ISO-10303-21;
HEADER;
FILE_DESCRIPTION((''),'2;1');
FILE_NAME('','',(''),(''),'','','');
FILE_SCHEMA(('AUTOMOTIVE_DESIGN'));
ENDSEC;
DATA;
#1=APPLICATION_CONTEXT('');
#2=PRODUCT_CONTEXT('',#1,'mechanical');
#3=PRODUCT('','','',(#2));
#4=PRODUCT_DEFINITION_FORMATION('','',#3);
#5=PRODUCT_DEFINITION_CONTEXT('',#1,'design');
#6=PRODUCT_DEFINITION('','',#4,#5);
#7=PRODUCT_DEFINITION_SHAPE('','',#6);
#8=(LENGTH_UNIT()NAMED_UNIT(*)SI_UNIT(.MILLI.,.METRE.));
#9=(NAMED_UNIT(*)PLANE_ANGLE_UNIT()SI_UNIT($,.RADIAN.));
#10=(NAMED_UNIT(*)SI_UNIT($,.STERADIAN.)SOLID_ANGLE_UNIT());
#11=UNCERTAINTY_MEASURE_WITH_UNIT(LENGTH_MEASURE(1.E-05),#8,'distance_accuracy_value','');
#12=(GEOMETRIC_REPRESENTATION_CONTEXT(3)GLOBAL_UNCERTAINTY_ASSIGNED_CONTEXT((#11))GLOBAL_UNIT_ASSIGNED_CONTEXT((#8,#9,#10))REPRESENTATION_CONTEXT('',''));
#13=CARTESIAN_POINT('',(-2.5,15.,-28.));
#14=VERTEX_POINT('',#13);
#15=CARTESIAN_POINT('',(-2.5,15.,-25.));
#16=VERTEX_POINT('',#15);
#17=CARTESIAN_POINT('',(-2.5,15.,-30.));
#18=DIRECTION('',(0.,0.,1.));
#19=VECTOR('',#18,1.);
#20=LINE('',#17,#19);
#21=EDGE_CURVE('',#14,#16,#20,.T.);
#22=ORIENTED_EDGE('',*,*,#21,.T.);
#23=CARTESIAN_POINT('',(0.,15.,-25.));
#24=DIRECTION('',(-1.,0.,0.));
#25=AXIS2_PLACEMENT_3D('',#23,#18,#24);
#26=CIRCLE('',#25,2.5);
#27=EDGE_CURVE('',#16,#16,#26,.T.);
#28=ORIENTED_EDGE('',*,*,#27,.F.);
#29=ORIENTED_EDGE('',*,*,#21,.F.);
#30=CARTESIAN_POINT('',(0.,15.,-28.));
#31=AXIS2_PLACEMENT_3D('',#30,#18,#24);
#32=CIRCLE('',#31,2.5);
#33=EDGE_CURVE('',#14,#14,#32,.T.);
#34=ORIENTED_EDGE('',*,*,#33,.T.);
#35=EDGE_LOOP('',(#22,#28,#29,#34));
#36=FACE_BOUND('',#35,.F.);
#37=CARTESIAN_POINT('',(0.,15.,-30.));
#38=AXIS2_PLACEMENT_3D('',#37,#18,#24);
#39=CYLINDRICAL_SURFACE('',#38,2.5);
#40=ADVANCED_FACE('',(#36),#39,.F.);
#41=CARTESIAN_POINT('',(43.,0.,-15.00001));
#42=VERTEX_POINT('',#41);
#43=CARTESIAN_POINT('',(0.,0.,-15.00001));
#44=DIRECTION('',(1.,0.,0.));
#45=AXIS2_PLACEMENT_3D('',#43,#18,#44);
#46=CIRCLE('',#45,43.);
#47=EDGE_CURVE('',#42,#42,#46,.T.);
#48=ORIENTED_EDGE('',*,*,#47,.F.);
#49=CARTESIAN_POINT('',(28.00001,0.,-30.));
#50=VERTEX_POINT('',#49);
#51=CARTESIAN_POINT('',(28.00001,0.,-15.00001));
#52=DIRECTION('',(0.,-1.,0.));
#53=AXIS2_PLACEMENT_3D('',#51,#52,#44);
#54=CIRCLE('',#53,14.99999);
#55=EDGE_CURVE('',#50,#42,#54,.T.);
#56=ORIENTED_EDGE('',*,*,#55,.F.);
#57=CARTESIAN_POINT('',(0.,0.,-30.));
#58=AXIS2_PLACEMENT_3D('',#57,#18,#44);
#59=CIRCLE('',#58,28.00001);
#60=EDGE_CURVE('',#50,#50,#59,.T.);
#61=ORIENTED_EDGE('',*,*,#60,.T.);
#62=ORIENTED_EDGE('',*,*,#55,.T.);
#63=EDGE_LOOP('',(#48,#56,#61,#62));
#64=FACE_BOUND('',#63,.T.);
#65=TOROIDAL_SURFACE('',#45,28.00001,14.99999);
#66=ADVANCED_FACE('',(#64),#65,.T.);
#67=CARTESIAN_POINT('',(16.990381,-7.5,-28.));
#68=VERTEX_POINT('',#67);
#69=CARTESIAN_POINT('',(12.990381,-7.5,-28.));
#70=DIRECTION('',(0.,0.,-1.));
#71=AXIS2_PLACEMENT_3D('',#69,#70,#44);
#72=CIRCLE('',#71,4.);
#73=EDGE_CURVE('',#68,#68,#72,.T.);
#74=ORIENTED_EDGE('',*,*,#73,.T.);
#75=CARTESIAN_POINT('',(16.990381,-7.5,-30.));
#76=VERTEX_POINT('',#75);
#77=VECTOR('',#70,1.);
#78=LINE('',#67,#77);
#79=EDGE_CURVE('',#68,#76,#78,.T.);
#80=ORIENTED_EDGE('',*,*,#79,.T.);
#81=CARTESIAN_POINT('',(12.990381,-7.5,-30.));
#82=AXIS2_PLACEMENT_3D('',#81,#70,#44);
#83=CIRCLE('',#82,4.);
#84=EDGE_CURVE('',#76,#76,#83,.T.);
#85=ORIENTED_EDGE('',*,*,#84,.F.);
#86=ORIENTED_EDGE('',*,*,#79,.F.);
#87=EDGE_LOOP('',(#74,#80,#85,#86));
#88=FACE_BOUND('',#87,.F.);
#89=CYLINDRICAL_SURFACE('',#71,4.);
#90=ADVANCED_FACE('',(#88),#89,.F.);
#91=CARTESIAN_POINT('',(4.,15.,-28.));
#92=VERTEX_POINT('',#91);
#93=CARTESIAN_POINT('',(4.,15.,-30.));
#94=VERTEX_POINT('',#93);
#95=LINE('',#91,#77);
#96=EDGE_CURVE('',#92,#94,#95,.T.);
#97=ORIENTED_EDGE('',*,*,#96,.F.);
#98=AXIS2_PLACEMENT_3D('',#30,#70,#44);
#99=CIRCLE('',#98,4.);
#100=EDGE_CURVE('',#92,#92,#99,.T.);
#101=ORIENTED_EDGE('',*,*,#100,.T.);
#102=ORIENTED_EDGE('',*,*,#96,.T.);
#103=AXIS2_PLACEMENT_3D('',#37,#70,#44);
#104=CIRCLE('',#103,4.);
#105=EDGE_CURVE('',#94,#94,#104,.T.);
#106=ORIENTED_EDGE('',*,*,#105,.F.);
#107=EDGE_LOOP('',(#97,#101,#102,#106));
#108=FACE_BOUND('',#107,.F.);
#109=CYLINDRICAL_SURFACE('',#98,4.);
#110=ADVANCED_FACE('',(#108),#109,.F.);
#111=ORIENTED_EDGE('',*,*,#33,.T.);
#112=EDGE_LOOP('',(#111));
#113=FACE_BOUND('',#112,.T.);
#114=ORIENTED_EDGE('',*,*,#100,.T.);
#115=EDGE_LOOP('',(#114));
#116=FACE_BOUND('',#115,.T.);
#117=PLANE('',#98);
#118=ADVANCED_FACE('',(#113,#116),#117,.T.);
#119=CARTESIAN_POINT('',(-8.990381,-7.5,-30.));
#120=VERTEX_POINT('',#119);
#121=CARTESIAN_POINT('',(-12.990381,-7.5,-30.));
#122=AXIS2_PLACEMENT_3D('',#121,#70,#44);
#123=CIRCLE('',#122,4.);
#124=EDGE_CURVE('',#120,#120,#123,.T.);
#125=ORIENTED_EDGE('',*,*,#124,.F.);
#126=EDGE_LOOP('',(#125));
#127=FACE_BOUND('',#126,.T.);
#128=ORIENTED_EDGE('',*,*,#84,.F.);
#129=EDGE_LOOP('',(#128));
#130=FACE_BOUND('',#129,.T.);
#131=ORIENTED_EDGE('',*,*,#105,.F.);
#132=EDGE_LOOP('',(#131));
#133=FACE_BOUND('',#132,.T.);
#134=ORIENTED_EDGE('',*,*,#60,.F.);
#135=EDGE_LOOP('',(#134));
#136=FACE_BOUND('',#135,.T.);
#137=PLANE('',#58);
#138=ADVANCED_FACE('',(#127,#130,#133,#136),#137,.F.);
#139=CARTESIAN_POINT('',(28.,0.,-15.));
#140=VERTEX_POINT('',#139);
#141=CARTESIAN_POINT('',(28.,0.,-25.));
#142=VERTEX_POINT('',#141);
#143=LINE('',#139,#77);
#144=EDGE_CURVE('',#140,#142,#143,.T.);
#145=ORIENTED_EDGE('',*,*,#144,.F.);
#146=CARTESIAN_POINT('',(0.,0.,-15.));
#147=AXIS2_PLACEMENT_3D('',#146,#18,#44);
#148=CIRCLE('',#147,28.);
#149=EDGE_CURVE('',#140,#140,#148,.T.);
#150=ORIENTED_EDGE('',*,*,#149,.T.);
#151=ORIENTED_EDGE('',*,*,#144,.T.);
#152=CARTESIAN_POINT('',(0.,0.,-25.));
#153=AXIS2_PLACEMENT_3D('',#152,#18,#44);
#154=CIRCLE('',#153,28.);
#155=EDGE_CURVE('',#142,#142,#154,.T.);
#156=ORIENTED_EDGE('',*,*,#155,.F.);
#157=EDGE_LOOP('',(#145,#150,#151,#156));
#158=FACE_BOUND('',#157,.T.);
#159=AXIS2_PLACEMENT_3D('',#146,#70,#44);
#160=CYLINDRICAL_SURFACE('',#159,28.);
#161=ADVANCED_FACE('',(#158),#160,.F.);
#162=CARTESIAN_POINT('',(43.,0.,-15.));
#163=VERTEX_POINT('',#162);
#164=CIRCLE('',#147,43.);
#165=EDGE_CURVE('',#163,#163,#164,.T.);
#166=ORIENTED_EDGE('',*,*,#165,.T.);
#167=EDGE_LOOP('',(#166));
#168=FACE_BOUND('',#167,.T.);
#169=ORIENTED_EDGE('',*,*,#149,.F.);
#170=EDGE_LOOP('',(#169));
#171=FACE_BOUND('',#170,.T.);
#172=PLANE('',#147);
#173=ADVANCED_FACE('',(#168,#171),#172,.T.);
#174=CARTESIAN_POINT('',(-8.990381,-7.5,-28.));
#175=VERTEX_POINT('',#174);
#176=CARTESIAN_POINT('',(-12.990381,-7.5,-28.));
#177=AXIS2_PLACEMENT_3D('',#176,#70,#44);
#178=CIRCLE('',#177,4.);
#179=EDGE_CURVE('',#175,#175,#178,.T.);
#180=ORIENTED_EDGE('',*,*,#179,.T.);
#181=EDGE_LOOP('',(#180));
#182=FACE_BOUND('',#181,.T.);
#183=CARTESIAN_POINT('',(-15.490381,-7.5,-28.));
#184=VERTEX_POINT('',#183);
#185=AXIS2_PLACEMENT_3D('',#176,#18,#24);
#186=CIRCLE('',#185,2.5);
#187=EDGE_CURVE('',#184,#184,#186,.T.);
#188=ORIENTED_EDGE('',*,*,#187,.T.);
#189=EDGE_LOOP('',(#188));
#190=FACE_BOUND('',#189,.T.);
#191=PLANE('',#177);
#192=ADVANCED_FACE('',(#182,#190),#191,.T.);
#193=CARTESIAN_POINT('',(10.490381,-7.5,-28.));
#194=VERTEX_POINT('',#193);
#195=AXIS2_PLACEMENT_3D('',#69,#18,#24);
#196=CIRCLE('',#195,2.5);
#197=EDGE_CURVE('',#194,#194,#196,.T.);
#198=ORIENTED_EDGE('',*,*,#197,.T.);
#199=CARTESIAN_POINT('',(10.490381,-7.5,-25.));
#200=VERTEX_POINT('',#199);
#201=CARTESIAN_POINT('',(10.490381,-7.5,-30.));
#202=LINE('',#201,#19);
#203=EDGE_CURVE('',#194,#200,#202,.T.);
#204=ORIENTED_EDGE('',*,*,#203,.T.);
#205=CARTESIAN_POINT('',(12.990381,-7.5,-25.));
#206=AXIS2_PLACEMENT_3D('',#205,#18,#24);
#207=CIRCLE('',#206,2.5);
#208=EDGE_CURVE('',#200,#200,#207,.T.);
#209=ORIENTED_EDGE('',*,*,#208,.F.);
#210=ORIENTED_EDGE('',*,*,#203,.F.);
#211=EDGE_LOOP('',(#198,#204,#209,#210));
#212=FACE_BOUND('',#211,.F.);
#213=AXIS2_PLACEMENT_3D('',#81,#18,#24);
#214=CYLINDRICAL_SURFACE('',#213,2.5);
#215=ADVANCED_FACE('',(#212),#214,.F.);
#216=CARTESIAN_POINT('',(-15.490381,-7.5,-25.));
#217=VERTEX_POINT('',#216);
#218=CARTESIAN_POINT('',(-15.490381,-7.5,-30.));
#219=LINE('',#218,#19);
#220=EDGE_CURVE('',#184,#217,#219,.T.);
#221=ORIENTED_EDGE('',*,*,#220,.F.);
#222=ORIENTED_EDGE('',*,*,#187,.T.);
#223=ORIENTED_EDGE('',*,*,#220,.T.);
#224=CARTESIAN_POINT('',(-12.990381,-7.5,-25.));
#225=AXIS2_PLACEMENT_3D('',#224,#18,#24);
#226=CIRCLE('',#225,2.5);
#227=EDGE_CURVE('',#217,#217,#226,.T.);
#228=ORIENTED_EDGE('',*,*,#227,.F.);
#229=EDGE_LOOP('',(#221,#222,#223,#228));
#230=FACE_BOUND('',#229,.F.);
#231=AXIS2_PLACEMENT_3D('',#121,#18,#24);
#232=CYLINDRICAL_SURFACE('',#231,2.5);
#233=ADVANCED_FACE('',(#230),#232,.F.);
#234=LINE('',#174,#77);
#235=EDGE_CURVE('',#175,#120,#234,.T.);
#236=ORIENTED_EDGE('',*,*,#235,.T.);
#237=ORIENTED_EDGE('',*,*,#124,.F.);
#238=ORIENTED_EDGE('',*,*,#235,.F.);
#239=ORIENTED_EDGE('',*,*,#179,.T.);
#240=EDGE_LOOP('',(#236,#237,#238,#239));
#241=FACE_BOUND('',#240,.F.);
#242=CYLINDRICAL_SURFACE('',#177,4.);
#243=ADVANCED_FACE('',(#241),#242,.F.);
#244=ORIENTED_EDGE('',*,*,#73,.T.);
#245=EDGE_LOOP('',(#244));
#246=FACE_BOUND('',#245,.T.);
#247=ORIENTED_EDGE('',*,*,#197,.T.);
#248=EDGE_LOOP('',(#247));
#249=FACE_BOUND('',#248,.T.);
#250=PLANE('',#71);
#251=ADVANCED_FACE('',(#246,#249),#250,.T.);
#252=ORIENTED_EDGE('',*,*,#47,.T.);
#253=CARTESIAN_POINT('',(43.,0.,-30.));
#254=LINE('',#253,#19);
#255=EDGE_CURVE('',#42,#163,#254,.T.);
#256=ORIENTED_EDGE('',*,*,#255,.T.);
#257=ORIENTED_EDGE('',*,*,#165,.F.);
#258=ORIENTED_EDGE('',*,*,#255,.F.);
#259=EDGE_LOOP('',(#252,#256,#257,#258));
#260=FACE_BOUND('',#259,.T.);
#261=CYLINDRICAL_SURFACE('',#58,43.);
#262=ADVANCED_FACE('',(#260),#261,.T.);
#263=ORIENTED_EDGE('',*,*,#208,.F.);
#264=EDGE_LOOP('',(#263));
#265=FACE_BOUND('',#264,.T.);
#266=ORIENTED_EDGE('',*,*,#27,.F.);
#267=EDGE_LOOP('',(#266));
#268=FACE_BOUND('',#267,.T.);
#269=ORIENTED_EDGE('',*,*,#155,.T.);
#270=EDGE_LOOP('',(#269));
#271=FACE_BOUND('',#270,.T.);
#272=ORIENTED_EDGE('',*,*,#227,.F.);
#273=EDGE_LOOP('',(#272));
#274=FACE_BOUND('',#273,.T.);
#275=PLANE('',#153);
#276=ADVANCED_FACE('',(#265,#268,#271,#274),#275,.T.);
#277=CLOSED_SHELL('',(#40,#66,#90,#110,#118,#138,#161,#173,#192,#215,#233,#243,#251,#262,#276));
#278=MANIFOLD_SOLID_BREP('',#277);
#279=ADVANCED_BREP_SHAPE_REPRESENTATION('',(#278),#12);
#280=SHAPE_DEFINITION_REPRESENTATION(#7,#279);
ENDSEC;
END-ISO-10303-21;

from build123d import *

# Parameters (mm, degrees)
F2_R           = 14.99999
F4_D           = 5
F4_CBORE_D     = 8
F4_CBORE_DEPTH = 2


# Not quite as in the source:
# - a fillet or chamfer is up to 0.001 mm smaller than in the source, because OpenCascade refuses the exact size


with BuildPart() as f1:
    # F0 (on Front) → F1 (revolve)
    with BuildSketch(Plane.XZ):
        Polygon((28, -25), (0, -25), (0, -30), (43, -30), (43, -15), (28, -15), align=None)
    revolve(axis=Axis((0, 0, -27.5), (0, 0, 1)))

    # F2 (radius 15 in the source; OpenCascade refuses exactly that, so slightly less here)
    f2_edges = [f1.edges().sort_by_distance(p)[0] for p in [
        (-43, 0, -30),
    ]]
    fillet(f2_edges, radius=F2_R)

    # F4 (through all)
    with Locations(Plane(origin=(0, 0, -30), x_dir=(1, 0, 0), z_dir=(0, 0, -1))):
        with Locations((-12.9903810568, 7.5), (12.9903810568, 7.5), (0, -15)):
            CounterBoreHole(F4_D / 2, F4_CBORE_D / 2, F4_CBORE_DEPTH)


solid = f1.part
